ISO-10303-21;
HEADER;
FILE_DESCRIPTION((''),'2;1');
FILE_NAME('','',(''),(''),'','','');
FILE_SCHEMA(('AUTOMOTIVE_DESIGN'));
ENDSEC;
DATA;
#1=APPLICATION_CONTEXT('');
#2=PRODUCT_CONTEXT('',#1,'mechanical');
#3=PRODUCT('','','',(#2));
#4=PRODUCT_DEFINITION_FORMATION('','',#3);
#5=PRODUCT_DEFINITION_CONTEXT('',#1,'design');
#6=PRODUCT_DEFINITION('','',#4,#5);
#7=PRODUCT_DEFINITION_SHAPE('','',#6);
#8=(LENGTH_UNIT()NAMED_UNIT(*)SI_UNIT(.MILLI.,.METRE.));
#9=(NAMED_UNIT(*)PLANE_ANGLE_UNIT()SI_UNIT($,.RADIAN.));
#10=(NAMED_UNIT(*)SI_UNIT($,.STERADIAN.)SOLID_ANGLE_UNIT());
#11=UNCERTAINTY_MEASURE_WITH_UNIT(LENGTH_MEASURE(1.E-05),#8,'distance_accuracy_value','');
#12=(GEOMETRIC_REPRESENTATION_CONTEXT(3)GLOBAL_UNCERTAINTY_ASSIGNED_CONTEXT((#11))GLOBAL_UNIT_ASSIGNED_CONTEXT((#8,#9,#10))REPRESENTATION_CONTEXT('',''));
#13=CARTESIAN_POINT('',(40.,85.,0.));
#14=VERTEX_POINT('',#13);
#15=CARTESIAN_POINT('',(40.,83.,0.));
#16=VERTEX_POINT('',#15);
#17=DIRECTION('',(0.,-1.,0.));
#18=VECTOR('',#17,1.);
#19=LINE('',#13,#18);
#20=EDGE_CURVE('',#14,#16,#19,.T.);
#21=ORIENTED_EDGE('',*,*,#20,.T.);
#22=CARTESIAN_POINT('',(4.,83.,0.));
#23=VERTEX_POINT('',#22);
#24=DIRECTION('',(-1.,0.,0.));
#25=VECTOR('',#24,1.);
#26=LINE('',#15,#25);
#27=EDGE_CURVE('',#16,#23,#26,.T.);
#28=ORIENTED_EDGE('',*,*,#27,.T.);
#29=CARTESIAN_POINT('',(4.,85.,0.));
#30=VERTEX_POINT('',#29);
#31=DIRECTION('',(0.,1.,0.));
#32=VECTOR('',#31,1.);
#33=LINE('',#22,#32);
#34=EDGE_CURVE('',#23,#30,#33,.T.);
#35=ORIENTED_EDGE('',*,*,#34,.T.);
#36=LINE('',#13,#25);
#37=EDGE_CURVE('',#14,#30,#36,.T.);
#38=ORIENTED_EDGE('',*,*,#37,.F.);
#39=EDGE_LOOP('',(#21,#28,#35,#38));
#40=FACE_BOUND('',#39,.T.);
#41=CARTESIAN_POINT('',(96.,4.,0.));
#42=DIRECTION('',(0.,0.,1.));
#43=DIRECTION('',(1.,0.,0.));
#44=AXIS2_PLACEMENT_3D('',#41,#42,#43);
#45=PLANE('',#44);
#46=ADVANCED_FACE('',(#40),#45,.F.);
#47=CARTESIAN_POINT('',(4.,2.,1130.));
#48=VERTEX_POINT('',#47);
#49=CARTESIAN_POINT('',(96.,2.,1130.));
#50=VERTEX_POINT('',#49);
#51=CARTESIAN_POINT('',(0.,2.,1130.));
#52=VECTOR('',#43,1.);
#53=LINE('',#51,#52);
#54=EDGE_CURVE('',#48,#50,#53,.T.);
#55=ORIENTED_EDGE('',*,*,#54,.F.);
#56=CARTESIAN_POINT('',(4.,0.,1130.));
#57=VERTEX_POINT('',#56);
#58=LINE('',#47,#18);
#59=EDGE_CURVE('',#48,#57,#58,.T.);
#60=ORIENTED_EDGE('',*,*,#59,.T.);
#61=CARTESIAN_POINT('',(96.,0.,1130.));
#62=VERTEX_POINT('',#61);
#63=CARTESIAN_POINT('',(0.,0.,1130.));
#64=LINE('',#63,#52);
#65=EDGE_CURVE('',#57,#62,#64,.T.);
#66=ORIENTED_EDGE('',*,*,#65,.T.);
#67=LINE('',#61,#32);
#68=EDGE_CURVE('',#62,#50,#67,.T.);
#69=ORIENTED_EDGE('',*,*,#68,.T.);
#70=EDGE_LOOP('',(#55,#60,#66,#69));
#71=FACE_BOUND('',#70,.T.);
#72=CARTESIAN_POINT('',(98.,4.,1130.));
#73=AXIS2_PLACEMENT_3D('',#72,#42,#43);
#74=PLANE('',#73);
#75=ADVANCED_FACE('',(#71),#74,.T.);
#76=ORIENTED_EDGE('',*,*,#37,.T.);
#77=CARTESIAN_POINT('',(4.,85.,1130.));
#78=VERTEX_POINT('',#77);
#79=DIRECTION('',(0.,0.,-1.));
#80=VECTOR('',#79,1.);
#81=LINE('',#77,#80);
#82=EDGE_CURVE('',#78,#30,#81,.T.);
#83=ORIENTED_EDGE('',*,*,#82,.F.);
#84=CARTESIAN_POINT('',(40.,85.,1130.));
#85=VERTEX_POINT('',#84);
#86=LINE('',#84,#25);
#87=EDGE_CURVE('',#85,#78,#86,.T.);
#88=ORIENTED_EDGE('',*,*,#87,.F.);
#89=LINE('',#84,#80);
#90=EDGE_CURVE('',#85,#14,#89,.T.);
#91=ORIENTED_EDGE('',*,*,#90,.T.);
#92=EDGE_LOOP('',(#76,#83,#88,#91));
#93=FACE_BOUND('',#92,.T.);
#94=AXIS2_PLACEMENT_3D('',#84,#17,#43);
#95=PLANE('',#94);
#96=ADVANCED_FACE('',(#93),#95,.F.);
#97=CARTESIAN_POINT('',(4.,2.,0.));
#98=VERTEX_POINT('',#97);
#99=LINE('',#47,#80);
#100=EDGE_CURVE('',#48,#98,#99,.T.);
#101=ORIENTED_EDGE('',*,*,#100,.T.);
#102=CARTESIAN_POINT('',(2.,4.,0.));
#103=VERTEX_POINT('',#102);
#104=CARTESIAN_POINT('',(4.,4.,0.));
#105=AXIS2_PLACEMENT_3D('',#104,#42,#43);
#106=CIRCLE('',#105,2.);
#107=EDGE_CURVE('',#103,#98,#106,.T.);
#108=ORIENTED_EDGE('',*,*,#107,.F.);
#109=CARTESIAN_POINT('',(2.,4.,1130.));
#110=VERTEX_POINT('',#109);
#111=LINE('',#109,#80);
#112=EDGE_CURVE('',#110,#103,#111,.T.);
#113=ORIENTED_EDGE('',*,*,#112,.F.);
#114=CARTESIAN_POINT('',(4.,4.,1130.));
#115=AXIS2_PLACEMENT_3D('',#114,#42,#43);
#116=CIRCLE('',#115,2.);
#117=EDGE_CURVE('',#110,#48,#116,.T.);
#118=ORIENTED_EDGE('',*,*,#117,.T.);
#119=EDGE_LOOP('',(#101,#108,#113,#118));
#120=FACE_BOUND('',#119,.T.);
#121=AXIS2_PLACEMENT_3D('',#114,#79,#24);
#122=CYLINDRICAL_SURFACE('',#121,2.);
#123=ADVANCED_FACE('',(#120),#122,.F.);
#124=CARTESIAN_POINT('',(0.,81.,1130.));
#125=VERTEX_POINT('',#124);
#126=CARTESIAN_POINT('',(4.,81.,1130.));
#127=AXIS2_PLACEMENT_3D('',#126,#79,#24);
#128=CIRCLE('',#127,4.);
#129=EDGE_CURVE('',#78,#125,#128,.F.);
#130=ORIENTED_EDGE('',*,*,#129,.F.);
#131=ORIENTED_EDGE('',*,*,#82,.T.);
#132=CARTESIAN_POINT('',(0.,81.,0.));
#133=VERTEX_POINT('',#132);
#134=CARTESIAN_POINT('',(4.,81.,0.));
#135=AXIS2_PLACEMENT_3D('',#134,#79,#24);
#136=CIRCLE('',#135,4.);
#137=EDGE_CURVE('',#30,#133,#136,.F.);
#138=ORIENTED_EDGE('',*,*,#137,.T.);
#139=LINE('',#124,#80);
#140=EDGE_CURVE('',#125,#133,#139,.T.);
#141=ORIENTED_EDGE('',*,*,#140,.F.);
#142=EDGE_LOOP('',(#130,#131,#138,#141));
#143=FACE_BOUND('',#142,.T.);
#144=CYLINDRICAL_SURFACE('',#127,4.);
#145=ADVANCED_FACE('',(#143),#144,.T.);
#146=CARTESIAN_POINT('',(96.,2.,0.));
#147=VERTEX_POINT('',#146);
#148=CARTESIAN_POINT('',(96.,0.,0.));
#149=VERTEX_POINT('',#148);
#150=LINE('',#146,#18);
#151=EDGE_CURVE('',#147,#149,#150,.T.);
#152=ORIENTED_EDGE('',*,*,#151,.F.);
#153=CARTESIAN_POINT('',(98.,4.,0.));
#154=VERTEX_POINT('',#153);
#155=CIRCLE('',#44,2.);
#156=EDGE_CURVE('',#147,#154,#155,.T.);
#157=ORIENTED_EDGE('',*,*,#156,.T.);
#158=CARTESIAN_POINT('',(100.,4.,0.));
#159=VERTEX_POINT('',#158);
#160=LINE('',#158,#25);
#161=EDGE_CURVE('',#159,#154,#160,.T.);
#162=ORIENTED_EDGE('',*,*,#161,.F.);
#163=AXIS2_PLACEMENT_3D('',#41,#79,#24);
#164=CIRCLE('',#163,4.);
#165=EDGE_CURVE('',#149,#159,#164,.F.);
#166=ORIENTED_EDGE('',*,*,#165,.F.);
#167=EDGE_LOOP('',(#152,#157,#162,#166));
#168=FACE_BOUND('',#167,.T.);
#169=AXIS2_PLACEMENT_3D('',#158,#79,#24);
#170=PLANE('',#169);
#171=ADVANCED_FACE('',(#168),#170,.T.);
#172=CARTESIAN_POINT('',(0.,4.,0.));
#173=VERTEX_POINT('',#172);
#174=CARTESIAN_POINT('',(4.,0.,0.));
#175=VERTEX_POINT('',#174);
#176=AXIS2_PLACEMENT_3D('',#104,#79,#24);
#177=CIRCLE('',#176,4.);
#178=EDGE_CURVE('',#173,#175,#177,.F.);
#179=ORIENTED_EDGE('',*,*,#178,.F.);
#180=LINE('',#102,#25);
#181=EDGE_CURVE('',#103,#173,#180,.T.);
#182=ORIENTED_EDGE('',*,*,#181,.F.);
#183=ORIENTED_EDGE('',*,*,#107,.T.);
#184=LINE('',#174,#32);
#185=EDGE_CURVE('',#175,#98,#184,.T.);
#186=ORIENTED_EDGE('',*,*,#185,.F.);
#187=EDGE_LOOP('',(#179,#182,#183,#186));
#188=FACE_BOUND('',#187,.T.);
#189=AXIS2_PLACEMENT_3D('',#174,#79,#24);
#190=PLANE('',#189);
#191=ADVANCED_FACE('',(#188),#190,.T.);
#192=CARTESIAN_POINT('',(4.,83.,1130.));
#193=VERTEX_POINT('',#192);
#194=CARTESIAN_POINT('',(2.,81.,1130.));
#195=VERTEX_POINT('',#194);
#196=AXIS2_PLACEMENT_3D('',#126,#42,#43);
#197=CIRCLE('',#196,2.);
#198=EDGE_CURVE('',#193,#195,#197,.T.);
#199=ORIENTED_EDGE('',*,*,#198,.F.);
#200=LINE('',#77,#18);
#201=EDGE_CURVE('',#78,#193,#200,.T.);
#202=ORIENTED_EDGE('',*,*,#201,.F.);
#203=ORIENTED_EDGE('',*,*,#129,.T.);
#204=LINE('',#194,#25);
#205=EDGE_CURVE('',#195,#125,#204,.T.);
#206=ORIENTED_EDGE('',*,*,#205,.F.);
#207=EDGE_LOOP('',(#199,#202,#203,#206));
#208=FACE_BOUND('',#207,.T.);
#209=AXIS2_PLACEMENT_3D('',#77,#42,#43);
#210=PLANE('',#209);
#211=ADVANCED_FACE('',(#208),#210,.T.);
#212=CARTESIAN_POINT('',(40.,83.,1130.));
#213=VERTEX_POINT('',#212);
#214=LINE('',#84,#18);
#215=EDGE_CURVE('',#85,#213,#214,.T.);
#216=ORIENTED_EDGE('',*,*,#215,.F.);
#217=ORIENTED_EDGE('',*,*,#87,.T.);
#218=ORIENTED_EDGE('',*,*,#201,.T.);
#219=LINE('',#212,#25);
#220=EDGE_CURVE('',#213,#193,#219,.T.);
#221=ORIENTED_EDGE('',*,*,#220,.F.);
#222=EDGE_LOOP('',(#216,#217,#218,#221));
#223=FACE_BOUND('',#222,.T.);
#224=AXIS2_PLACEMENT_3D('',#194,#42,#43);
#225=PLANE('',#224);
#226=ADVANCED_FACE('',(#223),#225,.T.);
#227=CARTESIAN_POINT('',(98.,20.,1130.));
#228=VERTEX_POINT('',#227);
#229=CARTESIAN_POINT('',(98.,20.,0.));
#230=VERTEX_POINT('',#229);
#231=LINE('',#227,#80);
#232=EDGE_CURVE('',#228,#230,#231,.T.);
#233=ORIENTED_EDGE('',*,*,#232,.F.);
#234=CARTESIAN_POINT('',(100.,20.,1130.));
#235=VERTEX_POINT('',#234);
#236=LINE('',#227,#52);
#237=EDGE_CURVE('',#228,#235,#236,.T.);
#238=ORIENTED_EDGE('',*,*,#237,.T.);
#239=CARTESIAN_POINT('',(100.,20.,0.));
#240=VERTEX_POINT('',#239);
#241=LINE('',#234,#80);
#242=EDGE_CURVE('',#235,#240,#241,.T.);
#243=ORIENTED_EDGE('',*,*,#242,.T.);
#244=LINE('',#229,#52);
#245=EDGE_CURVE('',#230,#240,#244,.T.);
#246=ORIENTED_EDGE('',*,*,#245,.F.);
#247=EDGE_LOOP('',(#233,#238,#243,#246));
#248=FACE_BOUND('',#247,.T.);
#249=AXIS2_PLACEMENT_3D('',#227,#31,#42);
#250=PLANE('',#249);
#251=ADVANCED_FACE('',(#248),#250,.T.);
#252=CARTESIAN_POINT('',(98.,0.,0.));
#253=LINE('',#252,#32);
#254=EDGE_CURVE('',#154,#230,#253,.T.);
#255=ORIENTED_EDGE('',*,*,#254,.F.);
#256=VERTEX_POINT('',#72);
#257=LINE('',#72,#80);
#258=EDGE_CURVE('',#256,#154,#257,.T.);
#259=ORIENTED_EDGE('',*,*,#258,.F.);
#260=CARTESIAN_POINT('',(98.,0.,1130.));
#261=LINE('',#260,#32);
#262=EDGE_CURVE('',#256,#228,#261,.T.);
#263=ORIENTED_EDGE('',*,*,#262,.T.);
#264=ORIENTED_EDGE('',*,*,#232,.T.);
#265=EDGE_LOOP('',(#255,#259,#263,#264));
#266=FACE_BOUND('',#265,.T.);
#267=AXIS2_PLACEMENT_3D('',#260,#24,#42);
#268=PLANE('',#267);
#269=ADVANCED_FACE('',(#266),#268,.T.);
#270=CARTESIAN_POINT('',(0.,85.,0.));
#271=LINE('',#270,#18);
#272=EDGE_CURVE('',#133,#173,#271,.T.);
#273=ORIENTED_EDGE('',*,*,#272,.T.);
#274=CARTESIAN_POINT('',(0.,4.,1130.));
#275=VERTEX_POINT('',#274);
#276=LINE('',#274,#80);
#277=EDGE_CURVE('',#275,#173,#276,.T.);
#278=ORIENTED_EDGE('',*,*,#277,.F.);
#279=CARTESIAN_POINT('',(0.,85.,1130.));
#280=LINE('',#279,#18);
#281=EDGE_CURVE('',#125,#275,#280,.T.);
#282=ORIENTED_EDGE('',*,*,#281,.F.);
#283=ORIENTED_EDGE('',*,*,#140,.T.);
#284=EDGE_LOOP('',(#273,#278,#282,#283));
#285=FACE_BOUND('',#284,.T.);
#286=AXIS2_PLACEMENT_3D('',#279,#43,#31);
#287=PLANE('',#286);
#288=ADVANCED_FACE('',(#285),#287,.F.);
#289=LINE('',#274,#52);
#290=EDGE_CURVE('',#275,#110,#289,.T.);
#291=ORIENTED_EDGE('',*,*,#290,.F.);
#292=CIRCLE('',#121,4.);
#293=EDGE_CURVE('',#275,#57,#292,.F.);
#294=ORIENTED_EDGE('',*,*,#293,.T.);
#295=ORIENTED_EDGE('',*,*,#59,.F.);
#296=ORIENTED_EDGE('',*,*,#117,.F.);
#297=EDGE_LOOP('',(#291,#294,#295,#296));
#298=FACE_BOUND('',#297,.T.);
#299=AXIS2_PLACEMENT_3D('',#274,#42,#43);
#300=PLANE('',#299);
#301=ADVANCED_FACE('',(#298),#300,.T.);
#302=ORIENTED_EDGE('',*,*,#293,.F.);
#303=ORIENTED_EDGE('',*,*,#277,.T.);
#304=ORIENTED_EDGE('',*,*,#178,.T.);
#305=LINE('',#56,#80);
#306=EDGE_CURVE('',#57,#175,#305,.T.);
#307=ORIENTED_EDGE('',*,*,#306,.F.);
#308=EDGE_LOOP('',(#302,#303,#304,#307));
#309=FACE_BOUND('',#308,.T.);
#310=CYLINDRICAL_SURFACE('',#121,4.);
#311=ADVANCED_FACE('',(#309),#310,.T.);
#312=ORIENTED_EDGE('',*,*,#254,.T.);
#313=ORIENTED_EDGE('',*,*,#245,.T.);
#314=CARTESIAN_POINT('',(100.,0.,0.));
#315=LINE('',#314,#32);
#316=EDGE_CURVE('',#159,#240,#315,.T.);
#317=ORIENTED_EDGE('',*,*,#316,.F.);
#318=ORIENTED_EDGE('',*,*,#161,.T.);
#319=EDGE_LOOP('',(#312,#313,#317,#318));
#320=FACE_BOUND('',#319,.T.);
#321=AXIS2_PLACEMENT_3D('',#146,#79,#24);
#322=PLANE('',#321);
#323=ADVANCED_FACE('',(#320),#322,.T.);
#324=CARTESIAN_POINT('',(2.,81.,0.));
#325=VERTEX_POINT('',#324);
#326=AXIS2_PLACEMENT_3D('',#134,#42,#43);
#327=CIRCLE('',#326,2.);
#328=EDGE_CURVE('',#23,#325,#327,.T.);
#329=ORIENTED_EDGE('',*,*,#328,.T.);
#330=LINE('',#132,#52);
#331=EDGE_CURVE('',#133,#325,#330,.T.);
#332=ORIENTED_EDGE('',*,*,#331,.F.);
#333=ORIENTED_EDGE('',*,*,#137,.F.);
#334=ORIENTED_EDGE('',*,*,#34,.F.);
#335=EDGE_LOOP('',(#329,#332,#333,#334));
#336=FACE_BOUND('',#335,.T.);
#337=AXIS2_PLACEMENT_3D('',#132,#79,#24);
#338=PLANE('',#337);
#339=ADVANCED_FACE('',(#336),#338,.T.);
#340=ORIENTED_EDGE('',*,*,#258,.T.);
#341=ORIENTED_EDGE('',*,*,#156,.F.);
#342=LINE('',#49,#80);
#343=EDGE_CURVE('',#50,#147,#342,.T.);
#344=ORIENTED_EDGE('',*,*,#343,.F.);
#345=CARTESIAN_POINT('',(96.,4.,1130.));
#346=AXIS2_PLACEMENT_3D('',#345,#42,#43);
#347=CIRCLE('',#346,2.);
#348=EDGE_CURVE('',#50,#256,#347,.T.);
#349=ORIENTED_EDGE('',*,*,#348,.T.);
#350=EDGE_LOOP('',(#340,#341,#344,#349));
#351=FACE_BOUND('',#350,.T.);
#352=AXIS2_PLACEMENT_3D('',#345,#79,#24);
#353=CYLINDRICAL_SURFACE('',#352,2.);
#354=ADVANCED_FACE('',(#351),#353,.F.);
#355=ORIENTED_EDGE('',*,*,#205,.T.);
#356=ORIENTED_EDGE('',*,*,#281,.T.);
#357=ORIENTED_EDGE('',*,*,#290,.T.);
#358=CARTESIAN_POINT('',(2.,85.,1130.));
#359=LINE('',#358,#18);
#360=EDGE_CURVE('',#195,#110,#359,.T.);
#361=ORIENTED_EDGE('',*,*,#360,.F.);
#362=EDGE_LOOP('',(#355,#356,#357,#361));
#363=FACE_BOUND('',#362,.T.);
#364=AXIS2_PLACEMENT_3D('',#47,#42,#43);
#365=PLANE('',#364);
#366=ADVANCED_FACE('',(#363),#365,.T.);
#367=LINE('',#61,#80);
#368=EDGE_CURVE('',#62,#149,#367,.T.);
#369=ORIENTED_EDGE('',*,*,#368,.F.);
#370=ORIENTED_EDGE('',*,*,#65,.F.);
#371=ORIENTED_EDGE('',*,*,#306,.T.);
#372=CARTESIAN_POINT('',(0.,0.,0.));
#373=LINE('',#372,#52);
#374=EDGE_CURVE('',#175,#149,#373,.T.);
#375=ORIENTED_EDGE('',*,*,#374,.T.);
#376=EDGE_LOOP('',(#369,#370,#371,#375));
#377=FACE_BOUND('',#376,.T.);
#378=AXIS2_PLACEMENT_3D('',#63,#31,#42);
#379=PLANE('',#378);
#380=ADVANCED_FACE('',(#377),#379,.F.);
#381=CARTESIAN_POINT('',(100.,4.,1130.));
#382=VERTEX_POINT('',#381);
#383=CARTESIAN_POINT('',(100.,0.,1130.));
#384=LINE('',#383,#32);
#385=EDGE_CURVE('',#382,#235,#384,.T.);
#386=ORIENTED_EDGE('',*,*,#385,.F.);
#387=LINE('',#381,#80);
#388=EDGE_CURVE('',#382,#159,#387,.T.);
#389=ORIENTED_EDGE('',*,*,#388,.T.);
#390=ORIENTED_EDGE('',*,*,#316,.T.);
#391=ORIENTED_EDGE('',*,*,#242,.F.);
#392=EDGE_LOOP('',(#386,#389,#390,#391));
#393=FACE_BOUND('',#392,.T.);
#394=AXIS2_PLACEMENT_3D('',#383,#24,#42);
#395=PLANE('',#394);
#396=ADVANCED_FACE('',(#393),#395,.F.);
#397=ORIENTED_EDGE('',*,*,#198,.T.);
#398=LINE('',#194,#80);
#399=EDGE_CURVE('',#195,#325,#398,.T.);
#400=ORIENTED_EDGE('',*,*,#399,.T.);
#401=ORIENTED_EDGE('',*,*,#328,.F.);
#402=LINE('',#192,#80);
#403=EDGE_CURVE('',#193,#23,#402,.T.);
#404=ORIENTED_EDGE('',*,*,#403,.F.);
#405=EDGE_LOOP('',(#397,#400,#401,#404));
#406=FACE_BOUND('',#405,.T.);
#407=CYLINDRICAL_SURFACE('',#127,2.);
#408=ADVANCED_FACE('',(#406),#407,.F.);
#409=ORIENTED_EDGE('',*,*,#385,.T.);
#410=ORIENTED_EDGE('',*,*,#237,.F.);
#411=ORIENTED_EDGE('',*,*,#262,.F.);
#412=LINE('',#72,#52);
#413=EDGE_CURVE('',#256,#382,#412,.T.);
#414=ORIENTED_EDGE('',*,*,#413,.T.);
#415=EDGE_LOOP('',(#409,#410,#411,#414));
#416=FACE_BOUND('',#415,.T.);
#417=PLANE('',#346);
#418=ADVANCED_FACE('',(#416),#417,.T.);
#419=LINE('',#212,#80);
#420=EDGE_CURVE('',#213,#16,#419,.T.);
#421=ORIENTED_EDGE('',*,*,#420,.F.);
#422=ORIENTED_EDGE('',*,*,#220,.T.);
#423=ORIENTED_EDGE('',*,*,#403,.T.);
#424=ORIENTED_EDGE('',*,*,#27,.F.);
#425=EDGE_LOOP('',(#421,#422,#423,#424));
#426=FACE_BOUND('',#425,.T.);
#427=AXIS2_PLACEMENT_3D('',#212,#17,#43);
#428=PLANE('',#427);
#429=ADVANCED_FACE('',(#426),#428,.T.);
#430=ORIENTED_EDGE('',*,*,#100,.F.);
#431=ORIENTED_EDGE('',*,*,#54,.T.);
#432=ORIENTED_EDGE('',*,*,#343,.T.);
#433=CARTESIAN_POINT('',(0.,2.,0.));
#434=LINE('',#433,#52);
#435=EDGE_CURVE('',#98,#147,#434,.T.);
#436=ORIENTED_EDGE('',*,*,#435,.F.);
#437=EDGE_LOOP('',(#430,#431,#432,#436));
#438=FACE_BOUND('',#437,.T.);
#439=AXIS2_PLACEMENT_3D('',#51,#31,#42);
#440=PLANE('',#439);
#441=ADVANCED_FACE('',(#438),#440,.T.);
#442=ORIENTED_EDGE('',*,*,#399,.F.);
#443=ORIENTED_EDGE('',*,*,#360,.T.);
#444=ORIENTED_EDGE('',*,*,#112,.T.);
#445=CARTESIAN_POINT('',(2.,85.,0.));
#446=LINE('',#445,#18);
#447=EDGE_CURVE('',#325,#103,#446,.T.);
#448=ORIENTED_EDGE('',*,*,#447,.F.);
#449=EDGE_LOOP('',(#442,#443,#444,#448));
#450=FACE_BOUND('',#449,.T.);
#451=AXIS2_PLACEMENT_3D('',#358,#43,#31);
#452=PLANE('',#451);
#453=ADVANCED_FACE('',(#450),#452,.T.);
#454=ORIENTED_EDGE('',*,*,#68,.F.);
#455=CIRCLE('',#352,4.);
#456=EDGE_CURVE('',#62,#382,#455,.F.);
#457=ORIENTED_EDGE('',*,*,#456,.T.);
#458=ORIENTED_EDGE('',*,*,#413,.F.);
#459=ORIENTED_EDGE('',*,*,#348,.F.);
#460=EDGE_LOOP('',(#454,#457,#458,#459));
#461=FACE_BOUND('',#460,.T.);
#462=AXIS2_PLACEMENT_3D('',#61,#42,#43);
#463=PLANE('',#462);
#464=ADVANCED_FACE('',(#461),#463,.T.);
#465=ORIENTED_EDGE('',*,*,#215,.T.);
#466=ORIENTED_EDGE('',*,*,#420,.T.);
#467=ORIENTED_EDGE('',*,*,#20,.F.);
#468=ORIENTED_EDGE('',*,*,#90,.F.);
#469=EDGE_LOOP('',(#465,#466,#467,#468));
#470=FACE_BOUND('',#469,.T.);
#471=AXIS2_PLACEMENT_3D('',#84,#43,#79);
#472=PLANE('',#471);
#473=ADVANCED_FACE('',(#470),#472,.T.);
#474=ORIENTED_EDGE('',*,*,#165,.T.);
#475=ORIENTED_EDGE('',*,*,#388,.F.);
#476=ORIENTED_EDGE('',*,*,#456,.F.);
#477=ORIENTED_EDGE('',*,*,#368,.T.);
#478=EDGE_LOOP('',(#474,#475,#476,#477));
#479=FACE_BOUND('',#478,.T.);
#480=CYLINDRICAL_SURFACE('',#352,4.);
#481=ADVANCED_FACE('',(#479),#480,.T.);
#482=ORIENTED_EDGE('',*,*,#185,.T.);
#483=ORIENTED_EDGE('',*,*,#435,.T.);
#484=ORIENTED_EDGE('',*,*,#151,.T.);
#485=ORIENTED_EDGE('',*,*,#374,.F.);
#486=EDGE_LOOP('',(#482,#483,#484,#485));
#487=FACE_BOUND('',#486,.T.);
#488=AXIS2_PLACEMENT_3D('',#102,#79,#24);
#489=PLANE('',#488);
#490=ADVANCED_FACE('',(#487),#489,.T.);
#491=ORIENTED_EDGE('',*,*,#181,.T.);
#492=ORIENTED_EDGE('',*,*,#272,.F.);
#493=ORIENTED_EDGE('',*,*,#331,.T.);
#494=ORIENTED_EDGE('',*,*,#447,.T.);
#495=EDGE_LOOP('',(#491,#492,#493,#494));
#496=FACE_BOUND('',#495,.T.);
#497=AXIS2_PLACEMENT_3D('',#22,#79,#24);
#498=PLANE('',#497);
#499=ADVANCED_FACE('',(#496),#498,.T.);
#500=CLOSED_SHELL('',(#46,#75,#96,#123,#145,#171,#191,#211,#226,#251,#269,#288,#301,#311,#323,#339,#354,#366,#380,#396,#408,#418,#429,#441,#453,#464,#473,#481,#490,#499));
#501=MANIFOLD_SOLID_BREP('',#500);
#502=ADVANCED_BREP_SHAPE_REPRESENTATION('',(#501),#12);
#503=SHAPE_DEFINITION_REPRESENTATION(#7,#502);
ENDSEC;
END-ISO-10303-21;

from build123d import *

# Parameters (mm, degrees)
BASE_FLANGE1_DEPTH = 1130


# Sheet-metal steps are written as plain solids
with BuildPart() as part:
    # Sketch1 → Base-Flange1 (new body)
    with BuildSketch(Plane.XY):
        with BuildLine():
            Line((40, 85), (4, 85))
            ThreePointArc((4, 85), (1.171572875, 83.828427125), (0, 81))
            Line((0, 81), (0, 4))
            ThreePointArc((0, 4), (1.171572875, 1.171572875), (4, 0))
            Line((4, 0), (96, 0))
            ThreePointArc((96, 0), (98.828427125, 1.171572875), (100, 4))
            Line((100, 4), (100, 20))
            Line((100, 20), (98, 20))
            Line((98, 20), (98, 4))
            ThreePointArc((98, 4), (97.414213562, 2.585786438), (96, 2))
            Line((96, 2), (4, 2))
            ThreePointArc((4, 2), (2.585786438, 2.585786438), (2, 4))
            Line((2, 4), (2, 81))
            ThreePointArc((2, 81), (2.585786438, 82.414213562), (4, 83))
            Line((4, 83), (40, 83))
            Line((40, 83), (40, 85))
        make_face()
    extrude(amount=BASE_FLANGE1_DEPTH)


solid = part.part
